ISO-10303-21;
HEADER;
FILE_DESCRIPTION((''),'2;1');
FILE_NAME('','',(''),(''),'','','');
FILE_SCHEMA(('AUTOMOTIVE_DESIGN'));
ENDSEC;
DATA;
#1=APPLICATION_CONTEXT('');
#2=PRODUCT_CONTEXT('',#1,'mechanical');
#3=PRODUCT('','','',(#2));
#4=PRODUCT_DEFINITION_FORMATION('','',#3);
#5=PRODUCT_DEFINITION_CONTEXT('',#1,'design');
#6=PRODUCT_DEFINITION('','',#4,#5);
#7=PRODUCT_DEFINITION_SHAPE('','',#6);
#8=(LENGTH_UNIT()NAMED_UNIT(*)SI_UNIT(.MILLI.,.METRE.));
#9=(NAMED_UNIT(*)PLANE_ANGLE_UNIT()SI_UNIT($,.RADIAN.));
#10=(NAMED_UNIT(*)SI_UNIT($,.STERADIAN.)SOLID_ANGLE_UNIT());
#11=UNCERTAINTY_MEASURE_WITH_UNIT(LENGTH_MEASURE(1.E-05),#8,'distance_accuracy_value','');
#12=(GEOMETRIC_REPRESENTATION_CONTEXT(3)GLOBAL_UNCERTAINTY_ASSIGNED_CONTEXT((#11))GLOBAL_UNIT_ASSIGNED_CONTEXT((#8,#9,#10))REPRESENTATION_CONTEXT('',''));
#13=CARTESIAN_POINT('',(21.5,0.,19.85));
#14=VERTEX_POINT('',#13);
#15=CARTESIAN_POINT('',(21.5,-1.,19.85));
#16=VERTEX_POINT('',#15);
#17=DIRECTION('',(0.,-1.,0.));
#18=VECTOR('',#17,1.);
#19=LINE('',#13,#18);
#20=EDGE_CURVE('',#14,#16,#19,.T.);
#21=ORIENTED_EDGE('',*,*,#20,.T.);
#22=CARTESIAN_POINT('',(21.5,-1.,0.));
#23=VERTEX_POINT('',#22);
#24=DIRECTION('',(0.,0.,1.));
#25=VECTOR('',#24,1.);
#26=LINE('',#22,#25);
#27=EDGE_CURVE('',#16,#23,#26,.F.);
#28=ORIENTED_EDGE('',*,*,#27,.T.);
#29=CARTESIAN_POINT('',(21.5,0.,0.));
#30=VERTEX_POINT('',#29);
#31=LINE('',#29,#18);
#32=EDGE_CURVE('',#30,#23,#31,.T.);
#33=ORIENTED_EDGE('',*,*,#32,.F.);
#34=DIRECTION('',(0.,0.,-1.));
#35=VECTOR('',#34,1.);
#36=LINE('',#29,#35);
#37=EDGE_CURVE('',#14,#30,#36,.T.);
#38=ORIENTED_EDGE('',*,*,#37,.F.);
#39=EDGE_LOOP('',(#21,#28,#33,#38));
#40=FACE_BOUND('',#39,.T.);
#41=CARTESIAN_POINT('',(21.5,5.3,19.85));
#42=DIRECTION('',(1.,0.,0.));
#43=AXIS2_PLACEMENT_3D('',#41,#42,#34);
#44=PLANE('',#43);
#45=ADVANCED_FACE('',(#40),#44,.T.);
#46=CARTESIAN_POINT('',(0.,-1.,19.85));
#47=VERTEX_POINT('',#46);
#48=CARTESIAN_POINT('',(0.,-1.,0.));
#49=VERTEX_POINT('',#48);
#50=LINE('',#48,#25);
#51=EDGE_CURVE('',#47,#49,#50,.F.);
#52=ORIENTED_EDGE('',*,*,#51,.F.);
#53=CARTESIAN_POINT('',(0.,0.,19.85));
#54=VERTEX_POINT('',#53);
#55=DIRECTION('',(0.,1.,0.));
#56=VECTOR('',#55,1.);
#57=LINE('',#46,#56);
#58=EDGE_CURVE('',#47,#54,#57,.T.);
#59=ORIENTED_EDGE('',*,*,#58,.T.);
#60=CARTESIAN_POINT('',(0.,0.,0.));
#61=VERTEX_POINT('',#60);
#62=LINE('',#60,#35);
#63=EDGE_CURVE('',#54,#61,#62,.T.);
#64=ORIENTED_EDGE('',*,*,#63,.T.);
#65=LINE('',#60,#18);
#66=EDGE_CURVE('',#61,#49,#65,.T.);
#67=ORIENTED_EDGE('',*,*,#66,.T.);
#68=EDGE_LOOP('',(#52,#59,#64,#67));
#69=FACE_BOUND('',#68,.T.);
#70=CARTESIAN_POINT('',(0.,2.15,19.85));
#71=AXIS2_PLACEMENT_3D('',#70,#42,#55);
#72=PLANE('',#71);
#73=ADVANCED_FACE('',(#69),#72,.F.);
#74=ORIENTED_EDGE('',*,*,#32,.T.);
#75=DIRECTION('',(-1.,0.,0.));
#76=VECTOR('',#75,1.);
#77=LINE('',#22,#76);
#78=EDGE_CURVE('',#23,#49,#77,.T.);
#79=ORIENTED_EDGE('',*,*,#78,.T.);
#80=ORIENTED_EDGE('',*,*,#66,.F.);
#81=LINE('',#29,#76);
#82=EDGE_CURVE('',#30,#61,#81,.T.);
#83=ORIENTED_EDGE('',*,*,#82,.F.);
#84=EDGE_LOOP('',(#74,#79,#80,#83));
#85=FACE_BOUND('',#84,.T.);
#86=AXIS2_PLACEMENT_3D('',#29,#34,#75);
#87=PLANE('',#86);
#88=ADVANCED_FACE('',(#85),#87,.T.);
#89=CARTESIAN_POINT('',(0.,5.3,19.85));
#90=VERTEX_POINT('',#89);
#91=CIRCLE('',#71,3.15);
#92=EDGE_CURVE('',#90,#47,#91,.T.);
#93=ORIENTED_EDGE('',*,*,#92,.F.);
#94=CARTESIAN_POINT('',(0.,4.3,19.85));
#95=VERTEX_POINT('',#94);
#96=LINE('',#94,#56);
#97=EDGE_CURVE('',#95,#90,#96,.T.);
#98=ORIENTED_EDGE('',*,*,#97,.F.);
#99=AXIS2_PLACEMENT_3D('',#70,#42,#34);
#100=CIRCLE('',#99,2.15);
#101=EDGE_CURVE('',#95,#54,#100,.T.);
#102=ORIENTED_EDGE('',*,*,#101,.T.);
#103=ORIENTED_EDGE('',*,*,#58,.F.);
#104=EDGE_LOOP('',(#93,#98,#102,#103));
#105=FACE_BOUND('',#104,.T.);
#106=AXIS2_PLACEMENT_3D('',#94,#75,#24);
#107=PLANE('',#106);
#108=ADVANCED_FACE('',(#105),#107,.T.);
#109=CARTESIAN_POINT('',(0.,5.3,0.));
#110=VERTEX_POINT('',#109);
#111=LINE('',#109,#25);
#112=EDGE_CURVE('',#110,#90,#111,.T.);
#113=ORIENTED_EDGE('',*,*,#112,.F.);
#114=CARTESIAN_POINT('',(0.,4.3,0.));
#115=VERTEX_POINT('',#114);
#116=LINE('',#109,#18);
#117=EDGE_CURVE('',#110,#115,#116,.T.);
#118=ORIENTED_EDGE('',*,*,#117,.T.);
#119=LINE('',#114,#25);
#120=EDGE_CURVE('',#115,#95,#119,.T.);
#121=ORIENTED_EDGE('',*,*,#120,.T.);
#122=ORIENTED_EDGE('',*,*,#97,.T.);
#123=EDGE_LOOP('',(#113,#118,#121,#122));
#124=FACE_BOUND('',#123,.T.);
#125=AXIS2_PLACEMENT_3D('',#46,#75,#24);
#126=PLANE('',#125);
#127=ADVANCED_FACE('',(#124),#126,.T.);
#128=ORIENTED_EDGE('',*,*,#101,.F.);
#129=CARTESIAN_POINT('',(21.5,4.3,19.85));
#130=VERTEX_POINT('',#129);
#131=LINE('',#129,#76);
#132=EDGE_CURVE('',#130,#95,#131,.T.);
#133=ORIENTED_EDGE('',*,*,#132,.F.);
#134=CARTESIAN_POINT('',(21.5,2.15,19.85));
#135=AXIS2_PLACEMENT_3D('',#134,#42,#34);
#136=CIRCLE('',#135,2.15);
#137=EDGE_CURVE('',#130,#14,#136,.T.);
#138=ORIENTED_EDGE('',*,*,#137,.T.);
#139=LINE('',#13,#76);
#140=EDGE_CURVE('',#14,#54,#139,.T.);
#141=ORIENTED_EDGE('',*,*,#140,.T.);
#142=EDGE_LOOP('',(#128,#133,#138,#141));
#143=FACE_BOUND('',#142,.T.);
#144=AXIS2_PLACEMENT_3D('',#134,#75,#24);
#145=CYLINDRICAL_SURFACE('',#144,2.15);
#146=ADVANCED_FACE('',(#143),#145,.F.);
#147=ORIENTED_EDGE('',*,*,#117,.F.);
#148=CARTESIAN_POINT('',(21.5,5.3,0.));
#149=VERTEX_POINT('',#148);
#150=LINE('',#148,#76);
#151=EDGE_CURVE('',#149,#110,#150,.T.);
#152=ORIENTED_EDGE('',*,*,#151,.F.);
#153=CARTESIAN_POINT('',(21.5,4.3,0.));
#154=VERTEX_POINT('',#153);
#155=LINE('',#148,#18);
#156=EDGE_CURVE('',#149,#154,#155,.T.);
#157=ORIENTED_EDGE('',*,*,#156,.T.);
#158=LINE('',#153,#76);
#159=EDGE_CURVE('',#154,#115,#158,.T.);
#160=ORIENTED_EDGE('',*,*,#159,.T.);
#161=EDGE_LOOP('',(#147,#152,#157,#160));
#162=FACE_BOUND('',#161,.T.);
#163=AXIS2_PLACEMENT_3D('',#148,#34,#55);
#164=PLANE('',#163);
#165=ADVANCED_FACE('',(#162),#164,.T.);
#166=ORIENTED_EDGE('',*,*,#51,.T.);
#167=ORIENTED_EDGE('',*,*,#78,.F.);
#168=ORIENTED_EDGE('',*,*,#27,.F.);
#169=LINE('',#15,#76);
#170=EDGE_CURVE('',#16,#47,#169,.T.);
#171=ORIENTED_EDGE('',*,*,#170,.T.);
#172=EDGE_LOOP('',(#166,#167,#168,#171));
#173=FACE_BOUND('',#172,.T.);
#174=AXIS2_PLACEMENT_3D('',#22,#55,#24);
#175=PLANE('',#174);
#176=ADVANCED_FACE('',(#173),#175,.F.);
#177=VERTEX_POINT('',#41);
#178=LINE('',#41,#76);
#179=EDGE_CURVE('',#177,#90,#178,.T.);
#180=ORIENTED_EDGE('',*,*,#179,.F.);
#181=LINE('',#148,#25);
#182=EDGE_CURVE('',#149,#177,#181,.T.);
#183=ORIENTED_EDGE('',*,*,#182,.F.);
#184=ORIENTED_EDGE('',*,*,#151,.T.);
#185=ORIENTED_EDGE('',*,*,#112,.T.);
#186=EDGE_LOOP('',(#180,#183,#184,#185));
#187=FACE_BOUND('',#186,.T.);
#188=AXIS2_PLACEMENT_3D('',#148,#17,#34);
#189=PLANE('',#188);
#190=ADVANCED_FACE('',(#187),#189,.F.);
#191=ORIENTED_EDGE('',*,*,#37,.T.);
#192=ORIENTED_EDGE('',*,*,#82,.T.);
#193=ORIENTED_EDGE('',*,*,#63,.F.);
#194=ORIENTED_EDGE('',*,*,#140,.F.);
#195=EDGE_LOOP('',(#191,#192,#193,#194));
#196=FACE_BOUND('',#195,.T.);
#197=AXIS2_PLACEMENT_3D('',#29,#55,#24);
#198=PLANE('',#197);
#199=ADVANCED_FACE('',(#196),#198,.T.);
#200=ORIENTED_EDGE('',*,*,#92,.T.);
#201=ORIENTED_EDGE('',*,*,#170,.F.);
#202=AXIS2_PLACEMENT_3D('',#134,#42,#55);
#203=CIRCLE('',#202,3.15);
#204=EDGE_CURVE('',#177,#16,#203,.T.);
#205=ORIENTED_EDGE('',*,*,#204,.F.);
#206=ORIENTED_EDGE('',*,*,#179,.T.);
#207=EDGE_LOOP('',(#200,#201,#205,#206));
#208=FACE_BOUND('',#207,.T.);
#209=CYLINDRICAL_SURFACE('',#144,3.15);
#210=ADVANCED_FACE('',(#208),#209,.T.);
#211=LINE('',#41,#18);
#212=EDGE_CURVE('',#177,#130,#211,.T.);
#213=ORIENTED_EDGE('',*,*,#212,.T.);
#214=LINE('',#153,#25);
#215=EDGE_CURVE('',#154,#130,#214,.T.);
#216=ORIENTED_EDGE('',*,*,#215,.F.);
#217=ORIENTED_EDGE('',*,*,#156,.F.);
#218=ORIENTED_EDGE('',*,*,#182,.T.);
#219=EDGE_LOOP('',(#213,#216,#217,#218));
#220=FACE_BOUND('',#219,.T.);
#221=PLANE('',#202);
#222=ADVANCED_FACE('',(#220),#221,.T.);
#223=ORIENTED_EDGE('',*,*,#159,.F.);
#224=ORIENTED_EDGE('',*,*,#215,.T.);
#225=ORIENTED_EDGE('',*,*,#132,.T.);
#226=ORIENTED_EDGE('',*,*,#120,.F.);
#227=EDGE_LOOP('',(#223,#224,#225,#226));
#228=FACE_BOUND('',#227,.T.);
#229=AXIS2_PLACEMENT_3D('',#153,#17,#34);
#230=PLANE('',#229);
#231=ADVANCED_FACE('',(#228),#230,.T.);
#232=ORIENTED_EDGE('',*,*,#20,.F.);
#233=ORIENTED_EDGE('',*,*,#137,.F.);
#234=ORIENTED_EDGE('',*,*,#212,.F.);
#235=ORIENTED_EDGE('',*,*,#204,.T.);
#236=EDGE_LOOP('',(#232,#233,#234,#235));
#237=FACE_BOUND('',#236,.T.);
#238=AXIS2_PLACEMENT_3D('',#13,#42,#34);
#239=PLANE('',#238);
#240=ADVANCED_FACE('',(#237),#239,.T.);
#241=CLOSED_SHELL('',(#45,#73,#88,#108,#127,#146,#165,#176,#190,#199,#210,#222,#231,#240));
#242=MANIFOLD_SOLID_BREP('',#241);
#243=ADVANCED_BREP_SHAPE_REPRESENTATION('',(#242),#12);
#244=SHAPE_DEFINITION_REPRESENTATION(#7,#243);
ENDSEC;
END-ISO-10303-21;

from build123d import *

# Parameters (mm, degrees)
TABAN_FLAN_1_DEPTH = 21.5


# Sheet-metal steps are written as plain solids
with BuildPart() as part:
    # Çizim1 → Taban-Flanş1 (new body)
    with BuildSketch(Plane.YZ):
        with BuildLine():
            Line((0, 0), (0, 19.85))
            ThreePointArc((0, 19.85), (2.15, 22), (4.3, 19.85))
            Line((4.3, 19.85), (4.3, 0))
            Line((4.3, 0), (5.3, 0))
            Line((5.3, 0), (5.3, 19.85))
            ThreePointArc((5.3, 19.85), (2.15, 23), (-1, 19.85))
            Line((-1, 19.85), (-1, 0))
            Line((-1, 0), (0, 0))
        make_face()
    extrude(amount=TABAN_FLAN_1_DEPTH)


solid = part.part
